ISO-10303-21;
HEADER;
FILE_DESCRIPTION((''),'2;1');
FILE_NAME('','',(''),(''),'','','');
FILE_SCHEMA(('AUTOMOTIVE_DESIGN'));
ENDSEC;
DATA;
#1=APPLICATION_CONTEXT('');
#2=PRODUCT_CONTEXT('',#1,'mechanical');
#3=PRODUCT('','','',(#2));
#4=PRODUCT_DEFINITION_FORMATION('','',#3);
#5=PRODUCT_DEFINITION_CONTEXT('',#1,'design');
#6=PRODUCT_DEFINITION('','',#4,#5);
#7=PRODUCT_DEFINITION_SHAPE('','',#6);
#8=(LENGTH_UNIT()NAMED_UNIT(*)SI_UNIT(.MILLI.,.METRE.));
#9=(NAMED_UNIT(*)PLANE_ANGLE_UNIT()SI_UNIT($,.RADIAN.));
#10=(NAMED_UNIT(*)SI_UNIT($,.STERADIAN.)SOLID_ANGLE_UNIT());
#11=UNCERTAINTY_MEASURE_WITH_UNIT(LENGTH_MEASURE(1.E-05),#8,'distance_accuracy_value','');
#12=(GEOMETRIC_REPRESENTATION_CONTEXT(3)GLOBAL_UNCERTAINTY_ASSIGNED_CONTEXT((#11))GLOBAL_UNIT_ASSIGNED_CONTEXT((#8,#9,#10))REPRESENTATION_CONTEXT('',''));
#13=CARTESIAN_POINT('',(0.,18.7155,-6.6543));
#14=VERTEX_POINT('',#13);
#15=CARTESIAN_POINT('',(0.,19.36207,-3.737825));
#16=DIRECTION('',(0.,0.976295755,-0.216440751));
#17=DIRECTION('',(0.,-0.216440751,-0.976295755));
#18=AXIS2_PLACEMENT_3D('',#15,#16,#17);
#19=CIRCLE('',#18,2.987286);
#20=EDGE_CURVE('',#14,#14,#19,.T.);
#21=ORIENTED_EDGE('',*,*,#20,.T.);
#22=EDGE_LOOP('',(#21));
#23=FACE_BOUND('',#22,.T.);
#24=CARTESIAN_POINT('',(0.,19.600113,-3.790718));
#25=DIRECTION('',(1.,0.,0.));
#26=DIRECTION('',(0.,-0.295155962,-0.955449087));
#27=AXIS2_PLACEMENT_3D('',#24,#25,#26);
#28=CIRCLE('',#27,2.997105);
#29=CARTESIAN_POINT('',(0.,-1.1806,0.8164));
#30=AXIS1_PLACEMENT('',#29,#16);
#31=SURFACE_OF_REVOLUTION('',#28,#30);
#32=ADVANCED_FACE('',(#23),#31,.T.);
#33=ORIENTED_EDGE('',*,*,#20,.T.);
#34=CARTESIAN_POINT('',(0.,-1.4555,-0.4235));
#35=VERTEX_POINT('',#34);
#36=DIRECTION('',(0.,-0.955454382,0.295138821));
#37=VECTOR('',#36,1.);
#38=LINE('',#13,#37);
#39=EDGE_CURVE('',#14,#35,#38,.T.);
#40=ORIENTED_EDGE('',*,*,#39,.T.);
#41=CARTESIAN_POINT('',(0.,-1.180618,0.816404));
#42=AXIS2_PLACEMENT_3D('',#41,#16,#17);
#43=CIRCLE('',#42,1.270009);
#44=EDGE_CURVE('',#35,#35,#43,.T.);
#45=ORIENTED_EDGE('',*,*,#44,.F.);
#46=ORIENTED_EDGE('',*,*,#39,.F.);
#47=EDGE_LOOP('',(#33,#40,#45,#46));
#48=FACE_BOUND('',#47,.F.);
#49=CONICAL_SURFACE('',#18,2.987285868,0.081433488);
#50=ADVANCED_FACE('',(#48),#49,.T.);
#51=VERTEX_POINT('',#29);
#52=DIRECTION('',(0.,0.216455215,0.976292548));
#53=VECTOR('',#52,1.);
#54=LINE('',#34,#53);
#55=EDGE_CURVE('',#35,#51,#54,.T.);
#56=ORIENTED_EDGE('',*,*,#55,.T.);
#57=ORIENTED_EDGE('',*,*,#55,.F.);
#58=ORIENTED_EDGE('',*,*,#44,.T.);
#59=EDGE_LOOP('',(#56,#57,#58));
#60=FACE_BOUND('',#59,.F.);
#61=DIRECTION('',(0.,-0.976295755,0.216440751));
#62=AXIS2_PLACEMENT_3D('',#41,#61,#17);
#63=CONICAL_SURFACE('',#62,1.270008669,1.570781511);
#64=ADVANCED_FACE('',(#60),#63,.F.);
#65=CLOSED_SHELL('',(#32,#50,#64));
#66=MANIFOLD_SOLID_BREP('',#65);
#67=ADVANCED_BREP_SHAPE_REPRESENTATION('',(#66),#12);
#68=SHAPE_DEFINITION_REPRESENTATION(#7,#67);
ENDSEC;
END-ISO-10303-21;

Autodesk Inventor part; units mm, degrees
sketch "Sketch_1" plane through (0, 0, 0) normal (1, 0, 0) x (0, 1, 0)
  line L0 (-1.1806, 0.8164) -> (22.5262, -4.4393)
  arc A0 (18.7155, -6.6543) -> (22.5262, -4.4393) centre (19.6001, -3.7906) ccw
  line L1 (18.7155, -6.6543) -> (-1.4555, -0.4235)
  line L2 (-1.4555, -0.4235) -> (-1.1806, 0.8164)
  line L3 (-1.1806, 0.8164) -> (22.5262, -4.4393)
revolve "Revolution1" add sketch "Sketch_1" angle 360 about axis through (0, -1.1806, 0.8164) along (0, 0.976296, -0.2164396)
ref_plane "toggle_XY" through (0, 2.5019, 0) normal (0, 1, 0) x (1, 0, 0)
ref_plane "toggle_YZ" through (0, 2.5019, 0) normal (1, 0, 0) x (0, 0, -1)
ref_plane "toggle_ZX" through (0, 2.5019, 0) normal (0, 0, -1) x (0, 1, 0)
ref_plane "toggle_cap_XY" through (0, 2.5019, 0) normal (0, -1, 0) x (1, 0, 0)
ref_plane "toggle_cap_YZ" through (0, 2.5019, 0) normal (1, 0, 0) x (0, 0, 1)
ref_plane "toggle_cap_ZX" through (0, 2.5019, 0) normal (0, 0, 1) x (0, -1, 0)
properties part number "S_low_toggle"
